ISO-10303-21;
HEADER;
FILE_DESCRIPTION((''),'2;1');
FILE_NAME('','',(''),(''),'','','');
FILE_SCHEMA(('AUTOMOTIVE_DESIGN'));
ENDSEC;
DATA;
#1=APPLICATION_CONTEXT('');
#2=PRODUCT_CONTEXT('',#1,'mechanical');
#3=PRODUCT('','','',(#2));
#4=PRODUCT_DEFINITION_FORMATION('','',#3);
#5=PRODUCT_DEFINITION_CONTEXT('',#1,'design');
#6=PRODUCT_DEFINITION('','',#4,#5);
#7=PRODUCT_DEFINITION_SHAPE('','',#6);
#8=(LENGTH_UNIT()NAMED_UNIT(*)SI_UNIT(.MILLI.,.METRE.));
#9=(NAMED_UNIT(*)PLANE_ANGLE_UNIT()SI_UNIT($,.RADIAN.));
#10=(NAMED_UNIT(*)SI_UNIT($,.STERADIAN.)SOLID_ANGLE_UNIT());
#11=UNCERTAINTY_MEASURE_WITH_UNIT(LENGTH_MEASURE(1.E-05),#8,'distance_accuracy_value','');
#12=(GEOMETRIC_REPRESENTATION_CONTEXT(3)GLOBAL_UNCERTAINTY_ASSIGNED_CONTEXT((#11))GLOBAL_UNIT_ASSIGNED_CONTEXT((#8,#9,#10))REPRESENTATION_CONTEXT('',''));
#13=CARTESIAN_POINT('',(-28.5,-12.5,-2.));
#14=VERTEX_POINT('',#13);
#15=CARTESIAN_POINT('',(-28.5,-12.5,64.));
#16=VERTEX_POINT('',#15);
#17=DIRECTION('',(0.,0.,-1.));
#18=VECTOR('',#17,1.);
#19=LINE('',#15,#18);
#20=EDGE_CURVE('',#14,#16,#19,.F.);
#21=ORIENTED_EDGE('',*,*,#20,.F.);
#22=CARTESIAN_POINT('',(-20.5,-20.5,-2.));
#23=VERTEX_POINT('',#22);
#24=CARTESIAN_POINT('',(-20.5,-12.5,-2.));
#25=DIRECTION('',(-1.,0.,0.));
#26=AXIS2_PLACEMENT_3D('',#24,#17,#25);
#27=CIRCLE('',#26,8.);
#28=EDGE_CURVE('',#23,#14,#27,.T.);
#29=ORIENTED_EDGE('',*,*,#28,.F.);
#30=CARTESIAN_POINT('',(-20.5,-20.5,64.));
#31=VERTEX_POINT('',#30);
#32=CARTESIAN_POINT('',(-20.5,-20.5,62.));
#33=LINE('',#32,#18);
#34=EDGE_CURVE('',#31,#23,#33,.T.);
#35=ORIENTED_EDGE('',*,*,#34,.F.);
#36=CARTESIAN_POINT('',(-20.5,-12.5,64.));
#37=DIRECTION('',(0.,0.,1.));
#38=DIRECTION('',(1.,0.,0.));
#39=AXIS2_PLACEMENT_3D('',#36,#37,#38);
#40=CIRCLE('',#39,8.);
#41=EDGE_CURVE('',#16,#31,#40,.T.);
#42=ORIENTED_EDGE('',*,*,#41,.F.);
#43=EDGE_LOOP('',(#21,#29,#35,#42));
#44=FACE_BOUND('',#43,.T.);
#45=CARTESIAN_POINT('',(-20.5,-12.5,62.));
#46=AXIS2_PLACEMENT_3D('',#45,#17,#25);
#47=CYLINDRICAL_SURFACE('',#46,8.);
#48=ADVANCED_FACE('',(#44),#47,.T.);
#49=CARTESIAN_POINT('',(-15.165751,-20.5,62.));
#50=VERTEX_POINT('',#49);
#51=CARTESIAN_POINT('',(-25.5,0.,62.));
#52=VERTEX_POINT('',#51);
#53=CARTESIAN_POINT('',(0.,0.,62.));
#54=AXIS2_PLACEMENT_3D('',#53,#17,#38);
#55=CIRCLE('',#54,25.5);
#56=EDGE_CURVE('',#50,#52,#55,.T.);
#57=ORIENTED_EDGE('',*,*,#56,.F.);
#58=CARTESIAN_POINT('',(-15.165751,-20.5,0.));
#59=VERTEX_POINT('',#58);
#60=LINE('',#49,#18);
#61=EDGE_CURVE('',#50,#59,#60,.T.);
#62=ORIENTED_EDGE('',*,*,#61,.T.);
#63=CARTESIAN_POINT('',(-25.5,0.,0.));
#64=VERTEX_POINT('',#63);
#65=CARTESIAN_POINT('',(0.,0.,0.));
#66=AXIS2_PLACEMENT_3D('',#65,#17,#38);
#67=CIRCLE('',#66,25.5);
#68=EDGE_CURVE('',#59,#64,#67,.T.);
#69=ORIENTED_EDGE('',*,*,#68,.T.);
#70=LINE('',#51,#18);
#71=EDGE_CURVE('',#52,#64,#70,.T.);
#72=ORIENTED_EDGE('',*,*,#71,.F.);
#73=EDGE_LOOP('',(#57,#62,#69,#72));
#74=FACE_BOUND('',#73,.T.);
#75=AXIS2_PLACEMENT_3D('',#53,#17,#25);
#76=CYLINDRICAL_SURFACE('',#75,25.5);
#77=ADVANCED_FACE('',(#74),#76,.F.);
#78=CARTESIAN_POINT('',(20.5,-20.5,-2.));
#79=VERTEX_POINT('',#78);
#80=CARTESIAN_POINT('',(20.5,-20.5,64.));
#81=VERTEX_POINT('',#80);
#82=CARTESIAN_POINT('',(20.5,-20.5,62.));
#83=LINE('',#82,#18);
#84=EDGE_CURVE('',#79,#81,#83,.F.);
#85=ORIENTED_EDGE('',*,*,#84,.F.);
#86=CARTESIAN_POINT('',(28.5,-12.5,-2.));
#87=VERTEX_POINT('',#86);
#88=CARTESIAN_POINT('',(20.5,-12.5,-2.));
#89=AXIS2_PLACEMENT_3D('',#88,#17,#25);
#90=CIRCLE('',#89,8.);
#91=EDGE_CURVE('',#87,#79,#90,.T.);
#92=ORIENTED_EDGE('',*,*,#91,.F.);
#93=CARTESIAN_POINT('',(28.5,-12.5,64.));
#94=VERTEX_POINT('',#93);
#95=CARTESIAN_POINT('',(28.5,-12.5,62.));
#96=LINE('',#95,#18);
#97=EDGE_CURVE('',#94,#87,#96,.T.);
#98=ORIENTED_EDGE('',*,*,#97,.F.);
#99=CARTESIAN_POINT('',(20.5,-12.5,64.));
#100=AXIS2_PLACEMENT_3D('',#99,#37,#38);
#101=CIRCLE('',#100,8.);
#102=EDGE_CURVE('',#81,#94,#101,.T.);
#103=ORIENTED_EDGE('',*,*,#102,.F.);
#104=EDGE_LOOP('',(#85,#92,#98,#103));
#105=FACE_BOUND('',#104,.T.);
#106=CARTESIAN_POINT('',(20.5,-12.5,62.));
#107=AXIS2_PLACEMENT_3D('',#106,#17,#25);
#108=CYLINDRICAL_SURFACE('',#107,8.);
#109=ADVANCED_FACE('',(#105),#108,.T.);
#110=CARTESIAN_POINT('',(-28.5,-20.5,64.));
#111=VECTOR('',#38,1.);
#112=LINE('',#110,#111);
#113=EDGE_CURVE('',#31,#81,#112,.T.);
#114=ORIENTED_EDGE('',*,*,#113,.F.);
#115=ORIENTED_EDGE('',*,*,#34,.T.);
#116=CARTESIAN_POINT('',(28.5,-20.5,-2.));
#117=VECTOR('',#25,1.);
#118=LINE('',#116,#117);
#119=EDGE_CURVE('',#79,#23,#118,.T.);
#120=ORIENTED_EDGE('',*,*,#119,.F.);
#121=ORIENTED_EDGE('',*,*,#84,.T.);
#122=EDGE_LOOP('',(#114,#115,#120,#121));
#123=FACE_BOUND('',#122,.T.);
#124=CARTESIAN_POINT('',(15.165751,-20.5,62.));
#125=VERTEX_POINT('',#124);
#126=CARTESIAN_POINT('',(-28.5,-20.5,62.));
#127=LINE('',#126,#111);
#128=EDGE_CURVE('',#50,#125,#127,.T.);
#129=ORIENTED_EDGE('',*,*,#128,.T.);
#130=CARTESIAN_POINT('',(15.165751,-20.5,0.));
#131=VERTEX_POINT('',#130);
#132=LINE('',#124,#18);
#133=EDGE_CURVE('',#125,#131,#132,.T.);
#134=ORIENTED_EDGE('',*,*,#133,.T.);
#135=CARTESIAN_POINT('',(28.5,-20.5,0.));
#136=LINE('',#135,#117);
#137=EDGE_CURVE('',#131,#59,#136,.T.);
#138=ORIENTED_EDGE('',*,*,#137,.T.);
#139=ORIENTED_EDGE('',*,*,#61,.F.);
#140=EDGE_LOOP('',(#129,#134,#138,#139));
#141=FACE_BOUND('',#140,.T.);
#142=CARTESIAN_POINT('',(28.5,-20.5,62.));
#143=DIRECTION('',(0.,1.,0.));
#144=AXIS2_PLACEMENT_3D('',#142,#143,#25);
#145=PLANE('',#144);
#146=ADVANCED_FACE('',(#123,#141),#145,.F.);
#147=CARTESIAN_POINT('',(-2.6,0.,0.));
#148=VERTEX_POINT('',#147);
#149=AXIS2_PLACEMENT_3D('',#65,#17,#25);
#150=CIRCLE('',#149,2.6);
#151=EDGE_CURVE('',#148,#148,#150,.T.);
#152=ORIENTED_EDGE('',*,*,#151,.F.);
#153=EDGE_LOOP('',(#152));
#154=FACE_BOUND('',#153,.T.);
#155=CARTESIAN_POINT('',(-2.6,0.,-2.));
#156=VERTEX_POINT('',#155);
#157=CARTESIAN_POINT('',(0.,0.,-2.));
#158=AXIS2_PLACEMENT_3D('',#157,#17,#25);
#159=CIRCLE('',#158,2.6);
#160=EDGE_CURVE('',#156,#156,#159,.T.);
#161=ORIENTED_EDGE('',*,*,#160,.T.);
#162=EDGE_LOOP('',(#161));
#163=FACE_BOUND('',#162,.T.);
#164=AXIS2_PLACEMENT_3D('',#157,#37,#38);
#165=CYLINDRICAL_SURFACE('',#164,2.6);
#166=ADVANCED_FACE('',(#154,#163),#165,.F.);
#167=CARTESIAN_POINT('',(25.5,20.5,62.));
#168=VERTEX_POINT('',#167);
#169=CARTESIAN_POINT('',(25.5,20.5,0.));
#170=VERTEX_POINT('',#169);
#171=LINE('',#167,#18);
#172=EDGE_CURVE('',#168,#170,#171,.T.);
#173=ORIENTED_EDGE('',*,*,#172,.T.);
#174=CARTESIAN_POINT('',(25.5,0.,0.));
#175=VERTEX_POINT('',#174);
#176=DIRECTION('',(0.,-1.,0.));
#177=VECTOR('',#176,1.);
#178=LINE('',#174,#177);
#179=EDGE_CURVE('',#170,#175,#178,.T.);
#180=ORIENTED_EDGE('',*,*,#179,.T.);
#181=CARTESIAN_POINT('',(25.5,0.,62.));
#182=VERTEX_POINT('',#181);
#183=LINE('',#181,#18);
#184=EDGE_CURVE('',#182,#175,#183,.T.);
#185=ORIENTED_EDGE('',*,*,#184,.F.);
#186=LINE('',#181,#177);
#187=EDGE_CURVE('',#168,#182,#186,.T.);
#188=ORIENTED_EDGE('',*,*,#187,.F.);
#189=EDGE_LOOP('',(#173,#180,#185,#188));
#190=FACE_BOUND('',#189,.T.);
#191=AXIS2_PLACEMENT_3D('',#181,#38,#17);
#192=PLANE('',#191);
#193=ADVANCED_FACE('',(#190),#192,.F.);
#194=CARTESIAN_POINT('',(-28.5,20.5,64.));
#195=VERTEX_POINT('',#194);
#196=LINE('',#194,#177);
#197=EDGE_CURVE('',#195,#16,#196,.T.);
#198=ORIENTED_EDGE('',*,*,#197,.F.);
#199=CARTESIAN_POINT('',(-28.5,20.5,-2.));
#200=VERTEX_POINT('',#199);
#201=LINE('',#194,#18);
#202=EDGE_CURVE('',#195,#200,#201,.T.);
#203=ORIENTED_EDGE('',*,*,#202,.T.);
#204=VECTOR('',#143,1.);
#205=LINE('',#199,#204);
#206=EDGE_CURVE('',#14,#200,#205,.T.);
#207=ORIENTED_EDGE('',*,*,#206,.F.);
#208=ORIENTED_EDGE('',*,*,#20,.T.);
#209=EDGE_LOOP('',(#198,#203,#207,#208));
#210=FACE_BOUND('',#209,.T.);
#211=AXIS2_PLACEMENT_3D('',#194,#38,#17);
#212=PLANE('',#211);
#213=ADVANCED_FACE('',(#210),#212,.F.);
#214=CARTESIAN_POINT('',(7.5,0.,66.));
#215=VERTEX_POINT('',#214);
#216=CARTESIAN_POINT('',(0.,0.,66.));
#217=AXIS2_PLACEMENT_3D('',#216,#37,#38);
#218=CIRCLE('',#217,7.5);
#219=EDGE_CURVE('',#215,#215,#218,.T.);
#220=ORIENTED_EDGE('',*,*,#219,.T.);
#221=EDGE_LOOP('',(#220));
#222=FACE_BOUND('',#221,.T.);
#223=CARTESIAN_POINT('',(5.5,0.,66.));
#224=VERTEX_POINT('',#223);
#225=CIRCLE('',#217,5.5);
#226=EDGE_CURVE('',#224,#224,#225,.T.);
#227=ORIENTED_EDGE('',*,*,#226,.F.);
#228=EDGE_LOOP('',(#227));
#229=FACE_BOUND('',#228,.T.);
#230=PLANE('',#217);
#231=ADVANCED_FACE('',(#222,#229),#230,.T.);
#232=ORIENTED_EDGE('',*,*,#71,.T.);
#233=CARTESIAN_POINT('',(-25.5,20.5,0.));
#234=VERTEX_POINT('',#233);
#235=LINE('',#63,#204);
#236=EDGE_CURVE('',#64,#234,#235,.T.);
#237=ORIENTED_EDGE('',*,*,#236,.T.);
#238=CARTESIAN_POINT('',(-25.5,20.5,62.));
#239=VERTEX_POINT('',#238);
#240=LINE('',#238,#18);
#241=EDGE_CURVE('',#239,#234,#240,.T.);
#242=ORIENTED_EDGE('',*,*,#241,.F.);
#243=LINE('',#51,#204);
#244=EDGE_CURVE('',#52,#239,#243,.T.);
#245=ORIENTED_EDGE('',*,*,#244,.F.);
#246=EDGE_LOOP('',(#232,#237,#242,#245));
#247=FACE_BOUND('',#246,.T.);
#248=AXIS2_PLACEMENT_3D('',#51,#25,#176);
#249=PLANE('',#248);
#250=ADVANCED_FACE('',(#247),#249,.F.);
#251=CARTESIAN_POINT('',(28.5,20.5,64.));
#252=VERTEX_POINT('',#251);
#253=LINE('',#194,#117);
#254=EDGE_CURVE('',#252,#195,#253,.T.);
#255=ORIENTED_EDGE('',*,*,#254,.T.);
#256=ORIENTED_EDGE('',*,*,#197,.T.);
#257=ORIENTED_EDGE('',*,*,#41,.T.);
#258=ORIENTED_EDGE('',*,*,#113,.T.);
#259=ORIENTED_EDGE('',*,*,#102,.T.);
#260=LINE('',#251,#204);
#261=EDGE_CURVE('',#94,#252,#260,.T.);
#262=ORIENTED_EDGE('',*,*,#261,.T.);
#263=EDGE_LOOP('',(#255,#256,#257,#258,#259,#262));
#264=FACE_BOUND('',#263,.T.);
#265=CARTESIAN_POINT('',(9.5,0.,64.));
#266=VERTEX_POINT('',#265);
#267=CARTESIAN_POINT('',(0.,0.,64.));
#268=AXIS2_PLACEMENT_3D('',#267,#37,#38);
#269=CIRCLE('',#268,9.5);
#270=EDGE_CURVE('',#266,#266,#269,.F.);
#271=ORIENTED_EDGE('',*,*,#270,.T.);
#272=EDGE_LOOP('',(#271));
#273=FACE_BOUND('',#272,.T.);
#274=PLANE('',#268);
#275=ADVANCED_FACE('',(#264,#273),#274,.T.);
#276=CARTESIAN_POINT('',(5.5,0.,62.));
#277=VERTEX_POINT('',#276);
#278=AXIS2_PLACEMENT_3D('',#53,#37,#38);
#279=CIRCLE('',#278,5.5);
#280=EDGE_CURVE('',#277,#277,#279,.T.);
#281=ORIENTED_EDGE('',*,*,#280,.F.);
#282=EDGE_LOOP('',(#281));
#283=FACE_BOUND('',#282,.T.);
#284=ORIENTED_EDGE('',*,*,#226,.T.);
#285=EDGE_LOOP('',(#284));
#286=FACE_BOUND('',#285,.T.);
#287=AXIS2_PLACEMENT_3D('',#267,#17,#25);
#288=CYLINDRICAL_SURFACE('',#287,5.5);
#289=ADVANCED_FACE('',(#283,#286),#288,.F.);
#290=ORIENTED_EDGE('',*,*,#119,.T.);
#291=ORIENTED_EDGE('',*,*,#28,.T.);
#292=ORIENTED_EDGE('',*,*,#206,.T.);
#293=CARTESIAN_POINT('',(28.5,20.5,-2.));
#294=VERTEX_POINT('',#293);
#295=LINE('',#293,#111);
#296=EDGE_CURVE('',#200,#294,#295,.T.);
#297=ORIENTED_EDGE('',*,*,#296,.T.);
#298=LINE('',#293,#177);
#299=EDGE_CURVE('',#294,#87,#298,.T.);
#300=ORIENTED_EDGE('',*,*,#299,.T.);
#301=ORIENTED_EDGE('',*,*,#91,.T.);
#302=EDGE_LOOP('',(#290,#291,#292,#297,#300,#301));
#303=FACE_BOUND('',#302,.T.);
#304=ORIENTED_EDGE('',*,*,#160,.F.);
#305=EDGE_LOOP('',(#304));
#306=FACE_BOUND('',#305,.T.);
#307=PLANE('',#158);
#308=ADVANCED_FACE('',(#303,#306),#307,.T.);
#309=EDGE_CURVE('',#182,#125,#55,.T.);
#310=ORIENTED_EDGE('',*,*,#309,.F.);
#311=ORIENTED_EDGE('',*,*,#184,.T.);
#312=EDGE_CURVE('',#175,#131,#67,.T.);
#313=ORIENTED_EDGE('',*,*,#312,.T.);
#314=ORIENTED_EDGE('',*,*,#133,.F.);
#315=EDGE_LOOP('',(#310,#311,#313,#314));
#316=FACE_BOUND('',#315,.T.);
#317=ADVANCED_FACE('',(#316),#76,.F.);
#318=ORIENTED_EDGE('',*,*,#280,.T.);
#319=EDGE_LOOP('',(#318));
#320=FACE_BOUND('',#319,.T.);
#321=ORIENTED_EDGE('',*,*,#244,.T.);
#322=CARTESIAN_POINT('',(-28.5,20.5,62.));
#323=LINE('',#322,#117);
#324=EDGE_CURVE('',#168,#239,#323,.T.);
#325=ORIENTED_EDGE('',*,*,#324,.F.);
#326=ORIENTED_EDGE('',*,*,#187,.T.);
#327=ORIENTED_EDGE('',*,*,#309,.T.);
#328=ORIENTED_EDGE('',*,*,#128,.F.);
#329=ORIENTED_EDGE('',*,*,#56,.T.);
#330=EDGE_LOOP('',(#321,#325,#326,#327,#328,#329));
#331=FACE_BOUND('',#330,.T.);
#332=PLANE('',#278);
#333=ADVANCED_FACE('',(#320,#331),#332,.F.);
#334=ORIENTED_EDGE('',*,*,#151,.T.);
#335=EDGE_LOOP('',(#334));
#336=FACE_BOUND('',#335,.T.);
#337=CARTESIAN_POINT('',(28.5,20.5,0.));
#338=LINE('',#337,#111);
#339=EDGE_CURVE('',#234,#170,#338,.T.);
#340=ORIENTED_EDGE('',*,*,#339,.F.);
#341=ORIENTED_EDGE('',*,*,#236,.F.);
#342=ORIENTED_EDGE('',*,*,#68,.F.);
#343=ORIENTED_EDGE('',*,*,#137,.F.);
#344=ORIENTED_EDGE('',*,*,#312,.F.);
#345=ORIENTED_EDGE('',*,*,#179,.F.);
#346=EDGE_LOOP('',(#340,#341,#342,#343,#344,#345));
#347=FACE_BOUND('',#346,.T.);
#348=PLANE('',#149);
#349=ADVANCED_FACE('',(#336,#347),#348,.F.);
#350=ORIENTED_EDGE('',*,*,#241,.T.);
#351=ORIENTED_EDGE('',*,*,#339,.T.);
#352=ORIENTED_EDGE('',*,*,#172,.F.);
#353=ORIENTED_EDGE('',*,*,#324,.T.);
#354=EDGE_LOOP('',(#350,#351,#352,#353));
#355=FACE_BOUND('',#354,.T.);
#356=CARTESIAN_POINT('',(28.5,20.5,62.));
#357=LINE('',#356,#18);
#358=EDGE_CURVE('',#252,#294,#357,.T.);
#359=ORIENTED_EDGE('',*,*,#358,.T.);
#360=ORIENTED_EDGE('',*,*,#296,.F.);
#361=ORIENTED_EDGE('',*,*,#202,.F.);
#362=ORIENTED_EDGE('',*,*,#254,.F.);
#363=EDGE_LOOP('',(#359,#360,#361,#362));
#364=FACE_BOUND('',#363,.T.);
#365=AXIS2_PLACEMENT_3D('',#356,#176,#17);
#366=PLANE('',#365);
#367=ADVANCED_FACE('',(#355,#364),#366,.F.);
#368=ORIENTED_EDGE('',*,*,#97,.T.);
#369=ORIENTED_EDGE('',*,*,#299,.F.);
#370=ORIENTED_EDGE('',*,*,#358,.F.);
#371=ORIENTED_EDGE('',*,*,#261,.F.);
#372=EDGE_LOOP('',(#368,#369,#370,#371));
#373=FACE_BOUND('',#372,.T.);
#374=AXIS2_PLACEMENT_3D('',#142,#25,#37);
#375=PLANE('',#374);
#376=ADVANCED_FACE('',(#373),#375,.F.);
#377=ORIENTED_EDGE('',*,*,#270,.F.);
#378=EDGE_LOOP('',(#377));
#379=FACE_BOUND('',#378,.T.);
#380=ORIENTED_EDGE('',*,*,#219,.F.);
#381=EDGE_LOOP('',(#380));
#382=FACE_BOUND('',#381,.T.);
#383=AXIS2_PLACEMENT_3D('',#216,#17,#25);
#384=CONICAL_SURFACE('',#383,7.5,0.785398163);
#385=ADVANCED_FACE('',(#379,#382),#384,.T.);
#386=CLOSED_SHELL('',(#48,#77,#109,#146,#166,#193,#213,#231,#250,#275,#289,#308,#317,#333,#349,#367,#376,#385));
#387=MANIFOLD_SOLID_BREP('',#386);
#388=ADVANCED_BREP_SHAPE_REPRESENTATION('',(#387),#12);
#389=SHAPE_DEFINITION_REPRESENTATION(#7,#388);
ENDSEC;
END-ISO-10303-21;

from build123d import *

# Parameters (mm, degrees)
ESTRUSIONE_ESTRUSIONE1_DEPTH   = 62
ESTRUSIONE_ESTRUSIONE1_2_DEPTH = 62
SCHIZZO2_W                     = 57
SCHIZZO2_H                     = 41
SCHIZZO2_R                     = 5.5
ESTRUSIONE_ESTRUSIONE2_DEPTH   = 2
SCHIZZO3_R                     = 7.5
SCHIZZO3_R_2                   = 5.5
ESTRUSIONE_ESTRUSIONE3_DEPTH   = 2
SMUSSO1_SIZE                   = 2
SCHIZZO4_W                     = 57
SCHIZZO4_H                     = 41
SCHIZZO4_R                     = 2.6
ESTRUSIONE_ESTRUSIONE4_DEPTH   = 2
RACCORDO1_R                    = 8


with BuildPart() as part:
    # Schizzo1 → Estrusione-Estrusione1 (new body)
    with BuildSketch(Plane.XY):
        with BuildLine():
            Line((-28.5, -20.5), (-28.5, 20.5))
            Line((-28.5, 20.5), (-25.5, 20.5))
            Line((-25.5, 20.5), (-25.5, 0))
            ThreePointArc((-25.5, 0), (-22.770338685, -11.478748894), (-15.165750888, -20.5))
            Line((-15.165750888, -20.5), (-28.5, -20.5))
        make_face()
    extrude(amount=ESTRUSIONE_ESTRUSIONE1_DEPTH)



with BuildPart() as body_2:
    # Schizzo1 → Estrusione-Estrusione1 2 (new body)
    with BuildSketch(Plane.XY):
        with BuildLine():
            Line((28.5, 20.5), (25.5, 20.5))
            Line((25.5, 20.5), (25.5, 0))
            ThreePointArc((25.5, 0), (22.770338685, -11.478748894), (15.165750888, -20.5))
            Line((15.165750888, -20.5), (28.5, -20.5))
            Line((28.5, -20.5), (28.5, 20.5))
        make_face()
    extrude(amount=ESTRUSIONE_ESTRUSIONE1_2_DEPTH)


with BuildPart() as part_1:
    add(part.part)

    add(body_2.part)  # Estrusione-Estrusione2 merges body 2
    # Schizzo2 → Estrusione-Estrusione2 (add)
    with BuildSketch(Plane.XY.offset(62)):
        Rectangle(SCHIZZO2_W, SCHIZZO2_H)
        Circle(SCHIZZO2_R, mode=Mode.SUBTRACT)
    extrude(amount=ESTRUSIONE_ESTRUSIONE2_DEPTH)

    # Schizzo3 → Estrusione-Estrusione3 (add)
    with BuildSketch(Plane.XY.offset(64)):
        Circle(SCHIZZO3_R)
        Circle(SCHIZZO3_R_2, mode=Mode.SUBTRACT)
    extrude(amount=ESTRUSIONE_ESTRUSIONE3_DEPTH)

    # Smusso1
    smusso1_edges = [part_1.edges().sort_by_distance(p)[0] for p in [
        (-7.5, 0, 64),
    ]]
    chamfer(smusso1_edges, length=SMUSSO1_SIZE - 0.0001)  # a hair under: the kernel refuses the full size

    # Schizzo4 → Estrusione-Estrusione4 (add)
    with BuildSketch(Plane(origin=(0, 0, 0), x_dir=(-1, 0, 0), z_dir=(0, 0, -1))):
        Rectangle(SCHIZZO4_W, SCHIZZO4_H)
        Circle(SCHIZZO4_R, mode=Mode.SUBTRACT)
    extrude(amount=ESTRUSIONE_ESTRUSIONE4_DEPTH)

    # Raccordo1
    raccordo1_edges = [part_1.edges().sort_by_distance(p)[0] for p in [
        (-28.5, -20.5, 31),
        (28.5, -20.5, 31),
    ]]
    fillet(raccordo1_edges, radius=RACCORDO1_R)


solid = part_1.part
